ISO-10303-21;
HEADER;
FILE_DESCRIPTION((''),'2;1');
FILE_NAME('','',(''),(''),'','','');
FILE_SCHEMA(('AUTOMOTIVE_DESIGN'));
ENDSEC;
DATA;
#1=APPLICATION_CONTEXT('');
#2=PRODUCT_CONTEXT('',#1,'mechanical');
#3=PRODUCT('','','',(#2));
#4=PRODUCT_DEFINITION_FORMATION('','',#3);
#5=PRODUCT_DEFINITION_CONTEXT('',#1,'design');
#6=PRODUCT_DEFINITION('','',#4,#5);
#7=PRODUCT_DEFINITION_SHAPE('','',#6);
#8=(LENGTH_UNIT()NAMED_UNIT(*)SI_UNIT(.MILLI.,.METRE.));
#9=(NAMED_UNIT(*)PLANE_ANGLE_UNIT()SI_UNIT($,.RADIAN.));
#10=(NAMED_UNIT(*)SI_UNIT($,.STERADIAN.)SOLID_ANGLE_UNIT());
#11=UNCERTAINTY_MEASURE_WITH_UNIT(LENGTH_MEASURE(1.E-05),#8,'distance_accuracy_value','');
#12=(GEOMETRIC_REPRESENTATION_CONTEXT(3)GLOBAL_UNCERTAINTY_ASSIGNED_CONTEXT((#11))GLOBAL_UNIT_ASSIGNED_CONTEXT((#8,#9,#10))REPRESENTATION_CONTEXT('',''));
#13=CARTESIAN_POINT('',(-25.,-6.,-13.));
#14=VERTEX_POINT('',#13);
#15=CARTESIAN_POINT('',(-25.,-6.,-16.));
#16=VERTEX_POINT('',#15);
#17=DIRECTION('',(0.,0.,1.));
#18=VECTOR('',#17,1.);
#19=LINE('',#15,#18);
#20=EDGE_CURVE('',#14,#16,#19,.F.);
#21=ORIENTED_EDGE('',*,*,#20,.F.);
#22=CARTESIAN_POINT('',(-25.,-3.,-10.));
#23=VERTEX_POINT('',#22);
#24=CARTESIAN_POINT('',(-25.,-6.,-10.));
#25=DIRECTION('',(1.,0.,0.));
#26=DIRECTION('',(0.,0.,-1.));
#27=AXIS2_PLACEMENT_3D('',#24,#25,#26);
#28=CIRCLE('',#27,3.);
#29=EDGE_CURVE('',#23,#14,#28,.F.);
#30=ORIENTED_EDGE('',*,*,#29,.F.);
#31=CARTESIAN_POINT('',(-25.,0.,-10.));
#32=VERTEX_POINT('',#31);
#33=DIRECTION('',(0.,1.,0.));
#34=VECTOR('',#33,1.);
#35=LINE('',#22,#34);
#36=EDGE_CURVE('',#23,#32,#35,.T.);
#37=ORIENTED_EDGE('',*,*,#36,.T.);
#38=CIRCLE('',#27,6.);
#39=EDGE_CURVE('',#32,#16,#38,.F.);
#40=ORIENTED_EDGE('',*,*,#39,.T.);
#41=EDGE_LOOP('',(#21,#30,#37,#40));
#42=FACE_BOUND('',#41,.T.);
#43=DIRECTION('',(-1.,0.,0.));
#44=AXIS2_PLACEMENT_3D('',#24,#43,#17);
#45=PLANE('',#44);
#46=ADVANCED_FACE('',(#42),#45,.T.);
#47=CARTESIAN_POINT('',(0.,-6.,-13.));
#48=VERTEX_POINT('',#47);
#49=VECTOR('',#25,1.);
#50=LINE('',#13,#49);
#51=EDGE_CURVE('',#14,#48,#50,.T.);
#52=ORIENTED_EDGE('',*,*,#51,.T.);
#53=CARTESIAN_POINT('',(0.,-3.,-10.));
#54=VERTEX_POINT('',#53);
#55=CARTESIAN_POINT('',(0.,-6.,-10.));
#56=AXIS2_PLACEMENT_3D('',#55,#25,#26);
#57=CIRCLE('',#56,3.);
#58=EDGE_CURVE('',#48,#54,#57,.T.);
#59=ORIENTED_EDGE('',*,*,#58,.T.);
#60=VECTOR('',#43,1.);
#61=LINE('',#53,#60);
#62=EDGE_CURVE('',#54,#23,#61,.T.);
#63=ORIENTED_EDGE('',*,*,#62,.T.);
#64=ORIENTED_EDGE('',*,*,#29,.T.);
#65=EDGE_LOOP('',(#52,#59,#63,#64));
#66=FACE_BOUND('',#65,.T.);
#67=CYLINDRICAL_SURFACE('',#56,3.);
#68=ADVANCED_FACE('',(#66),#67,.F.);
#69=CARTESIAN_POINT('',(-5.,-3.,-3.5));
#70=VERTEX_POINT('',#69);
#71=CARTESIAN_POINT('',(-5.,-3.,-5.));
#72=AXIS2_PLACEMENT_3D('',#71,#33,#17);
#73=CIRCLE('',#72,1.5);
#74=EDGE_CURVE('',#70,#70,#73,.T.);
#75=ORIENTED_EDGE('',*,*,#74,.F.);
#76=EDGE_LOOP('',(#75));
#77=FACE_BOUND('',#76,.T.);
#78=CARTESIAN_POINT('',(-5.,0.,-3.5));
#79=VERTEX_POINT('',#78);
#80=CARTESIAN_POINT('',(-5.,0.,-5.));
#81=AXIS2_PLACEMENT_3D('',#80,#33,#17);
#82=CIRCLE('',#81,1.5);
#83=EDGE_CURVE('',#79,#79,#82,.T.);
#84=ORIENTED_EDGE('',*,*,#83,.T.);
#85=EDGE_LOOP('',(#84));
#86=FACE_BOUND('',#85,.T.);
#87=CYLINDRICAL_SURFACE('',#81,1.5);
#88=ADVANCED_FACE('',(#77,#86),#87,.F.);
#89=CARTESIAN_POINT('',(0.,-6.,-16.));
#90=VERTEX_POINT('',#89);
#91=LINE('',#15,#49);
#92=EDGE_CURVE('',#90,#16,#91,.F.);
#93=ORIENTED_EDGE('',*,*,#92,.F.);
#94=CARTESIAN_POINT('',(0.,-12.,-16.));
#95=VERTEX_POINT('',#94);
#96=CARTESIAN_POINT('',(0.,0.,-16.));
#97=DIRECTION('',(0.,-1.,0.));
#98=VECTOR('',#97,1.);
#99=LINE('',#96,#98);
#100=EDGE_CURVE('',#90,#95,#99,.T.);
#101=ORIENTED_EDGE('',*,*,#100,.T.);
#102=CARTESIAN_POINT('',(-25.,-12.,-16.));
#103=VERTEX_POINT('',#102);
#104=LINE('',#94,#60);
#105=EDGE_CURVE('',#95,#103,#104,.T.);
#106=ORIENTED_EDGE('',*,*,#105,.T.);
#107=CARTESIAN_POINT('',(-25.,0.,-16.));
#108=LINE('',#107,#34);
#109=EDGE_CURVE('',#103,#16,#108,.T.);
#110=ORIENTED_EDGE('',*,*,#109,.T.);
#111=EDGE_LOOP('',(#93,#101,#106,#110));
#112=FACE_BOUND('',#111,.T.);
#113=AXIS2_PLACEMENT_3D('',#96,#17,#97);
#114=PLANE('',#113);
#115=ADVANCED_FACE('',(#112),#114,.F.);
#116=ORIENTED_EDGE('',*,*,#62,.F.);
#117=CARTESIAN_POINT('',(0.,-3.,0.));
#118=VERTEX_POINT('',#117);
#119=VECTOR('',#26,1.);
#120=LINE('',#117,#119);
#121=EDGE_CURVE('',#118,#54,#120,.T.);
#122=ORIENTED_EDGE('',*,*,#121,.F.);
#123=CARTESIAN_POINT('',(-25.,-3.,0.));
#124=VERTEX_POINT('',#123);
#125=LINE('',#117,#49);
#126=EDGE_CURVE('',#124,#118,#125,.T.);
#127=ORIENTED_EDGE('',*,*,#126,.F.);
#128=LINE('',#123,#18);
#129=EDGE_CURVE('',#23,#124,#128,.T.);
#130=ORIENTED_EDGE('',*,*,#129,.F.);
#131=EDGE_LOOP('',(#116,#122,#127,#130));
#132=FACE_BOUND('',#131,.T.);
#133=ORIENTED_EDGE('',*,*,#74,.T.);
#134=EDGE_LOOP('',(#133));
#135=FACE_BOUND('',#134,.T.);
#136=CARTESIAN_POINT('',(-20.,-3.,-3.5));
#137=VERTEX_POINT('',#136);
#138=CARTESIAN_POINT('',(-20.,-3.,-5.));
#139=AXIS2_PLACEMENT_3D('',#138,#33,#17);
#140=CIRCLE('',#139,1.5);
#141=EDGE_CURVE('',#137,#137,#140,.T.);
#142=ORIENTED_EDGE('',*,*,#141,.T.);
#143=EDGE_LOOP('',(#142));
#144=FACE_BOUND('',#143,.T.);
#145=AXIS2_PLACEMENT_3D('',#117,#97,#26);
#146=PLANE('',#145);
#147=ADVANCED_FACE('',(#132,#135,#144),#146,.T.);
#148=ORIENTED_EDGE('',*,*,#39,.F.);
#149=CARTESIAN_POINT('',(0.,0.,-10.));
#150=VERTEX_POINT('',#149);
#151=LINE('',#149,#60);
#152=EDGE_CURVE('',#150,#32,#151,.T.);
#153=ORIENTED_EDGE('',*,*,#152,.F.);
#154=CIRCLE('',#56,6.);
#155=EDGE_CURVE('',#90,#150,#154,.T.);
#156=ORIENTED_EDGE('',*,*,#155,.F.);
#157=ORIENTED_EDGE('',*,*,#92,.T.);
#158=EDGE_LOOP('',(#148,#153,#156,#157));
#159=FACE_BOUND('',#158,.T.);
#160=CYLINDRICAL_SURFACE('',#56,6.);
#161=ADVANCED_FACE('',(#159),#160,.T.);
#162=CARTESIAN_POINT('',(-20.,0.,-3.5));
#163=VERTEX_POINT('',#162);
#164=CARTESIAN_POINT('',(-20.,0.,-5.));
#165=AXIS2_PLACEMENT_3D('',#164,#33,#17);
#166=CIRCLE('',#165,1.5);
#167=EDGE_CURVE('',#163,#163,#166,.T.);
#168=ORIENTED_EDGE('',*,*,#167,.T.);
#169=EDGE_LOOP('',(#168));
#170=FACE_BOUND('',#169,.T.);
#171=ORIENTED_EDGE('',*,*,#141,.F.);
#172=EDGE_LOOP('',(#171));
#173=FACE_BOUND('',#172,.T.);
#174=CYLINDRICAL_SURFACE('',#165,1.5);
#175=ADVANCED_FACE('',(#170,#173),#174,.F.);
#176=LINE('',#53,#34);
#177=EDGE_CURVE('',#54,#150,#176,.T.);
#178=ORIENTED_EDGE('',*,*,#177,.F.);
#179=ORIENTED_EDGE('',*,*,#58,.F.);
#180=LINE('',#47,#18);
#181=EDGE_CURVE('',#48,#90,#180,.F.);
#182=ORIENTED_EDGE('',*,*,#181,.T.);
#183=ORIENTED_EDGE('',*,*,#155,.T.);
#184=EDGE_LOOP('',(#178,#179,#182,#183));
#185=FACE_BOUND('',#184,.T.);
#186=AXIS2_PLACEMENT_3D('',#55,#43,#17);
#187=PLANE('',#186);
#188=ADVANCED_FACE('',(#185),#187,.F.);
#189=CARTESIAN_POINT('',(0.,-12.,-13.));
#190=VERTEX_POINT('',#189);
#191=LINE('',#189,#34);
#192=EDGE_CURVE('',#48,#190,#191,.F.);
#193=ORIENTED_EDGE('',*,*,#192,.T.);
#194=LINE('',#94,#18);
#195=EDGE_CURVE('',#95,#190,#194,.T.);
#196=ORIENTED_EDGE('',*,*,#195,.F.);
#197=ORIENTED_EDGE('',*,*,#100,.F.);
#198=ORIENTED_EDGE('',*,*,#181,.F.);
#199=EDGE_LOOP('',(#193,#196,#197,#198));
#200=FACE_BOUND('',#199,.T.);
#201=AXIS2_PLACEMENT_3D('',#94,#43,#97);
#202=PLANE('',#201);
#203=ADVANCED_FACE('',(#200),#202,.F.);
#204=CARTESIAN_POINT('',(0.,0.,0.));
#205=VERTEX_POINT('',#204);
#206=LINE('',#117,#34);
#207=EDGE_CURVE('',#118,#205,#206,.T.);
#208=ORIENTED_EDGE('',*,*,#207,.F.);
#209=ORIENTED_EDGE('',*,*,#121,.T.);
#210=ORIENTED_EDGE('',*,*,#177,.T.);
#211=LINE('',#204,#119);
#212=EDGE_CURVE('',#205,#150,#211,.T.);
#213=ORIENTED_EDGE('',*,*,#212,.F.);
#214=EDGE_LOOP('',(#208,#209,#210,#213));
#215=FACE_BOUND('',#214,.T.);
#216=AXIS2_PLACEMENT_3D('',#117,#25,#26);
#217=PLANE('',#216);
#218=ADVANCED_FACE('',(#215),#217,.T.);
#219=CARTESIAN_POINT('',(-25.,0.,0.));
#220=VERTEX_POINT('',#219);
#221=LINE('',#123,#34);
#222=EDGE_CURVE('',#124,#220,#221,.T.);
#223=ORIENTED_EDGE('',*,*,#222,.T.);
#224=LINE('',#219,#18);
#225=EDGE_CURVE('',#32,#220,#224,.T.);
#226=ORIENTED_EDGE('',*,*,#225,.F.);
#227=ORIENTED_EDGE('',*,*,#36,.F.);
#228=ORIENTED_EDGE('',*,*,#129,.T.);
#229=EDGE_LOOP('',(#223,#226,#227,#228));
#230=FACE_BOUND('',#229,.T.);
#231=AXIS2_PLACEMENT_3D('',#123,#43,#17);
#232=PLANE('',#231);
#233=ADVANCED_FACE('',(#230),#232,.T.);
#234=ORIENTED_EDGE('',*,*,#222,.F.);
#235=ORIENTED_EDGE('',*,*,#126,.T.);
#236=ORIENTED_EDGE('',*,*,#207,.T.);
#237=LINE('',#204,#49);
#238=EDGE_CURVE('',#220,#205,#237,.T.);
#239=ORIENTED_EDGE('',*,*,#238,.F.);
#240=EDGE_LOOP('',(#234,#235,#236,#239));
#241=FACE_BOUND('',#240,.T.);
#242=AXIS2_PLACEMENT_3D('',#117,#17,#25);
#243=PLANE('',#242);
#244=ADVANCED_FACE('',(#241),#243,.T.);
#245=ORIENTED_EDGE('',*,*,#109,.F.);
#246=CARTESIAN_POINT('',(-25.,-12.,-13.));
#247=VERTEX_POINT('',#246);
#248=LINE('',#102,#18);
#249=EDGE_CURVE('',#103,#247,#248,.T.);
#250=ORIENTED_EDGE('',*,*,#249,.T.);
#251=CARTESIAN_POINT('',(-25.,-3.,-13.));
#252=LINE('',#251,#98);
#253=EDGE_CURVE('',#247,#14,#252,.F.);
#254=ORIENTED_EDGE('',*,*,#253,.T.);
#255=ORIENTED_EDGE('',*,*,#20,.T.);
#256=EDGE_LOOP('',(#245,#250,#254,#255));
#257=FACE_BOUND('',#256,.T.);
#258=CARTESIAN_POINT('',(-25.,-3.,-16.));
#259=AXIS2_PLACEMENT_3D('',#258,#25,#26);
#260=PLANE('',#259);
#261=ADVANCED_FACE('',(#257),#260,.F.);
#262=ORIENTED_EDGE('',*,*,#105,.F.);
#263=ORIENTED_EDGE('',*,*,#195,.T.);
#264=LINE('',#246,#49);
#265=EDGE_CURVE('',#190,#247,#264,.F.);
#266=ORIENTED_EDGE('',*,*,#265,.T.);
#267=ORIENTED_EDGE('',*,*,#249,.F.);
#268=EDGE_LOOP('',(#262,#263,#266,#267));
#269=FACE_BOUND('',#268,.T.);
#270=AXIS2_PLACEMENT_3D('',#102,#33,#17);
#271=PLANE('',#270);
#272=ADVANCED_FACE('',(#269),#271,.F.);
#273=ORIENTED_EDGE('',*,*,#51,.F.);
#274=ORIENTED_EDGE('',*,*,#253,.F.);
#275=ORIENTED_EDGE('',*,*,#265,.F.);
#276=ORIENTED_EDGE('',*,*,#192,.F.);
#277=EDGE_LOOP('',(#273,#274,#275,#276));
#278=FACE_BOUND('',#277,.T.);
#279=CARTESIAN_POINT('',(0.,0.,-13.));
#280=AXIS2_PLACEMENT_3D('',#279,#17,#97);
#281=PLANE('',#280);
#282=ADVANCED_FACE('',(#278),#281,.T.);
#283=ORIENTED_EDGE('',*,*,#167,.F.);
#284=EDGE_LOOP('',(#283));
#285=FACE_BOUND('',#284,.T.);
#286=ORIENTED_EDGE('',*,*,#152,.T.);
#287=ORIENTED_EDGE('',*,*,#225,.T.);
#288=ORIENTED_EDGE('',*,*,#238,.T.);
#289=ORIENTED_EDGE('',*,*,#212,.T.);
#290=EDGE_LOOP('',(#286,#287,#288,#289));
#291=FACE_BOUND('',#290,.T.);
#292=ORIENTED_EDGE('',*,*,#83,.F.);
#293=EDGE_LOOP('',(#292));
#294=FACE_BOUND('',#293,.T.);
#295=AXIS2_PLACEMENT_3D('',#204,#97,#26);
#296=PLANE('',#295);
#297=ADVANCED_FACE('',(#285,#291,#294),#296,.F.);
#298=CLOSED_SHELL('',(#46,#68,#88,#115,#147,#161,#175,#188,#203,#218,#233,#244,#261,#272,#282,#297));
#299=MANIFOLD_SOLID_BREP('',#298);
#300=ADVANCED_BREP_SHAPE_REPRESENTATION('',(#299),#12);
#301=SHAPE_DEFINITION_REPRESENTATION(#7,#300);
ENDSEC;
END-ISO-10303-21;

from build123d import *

# Parameters (mm, degrees)
SKETCH1_W                = 25
SKETCH1_H                = 10
BASE_FLANGE1_DEPTH       = 3
F_3_0_3_DIAMETER_HOLE1_D = 3
SM_EDGE_FLANGE_1_DEPTH   = 25


# Sheet-metal steps are written as plain solids
with BuildPart() as part:
    # Sketch1 → Base-Flange1 (new body)
    with BuildSketch(Plane(origin=(0, 0, 0), x_dir=(1, 0, 0), z_dir=(0, 1, 0))):
        with Locations((-12.5, 5)):
            Rectangle(SKETCH1_W, SKETCH1_H)
    extrude(amount=-BASE_FLANGE1_DEPTH)

    # Ø3.0 (3) Diameter Hole1 (through all)
    with Locations(Plane(origin=(0, 0, 0), x_dir=(1, 0, 0), z_dir=(0, 1, 0))):
        with Locations((-20, 5), (-5, 5)):
            Hole(F_3_0_3_DIAMETER_HOLE1_D / 2)

    # 邊線-凸緣1 section (across the edge) → 邊線-凸緣1 (add)
    with BuildSketch(Plane(origin=(-25, -3, -13), x_dir=(0, 0, 1), z_dir=(1, 0, 0))):
        with BuildLine():
            Line((-3, 3), (-3, 9))
            Line((-3, 9), (0, 9))
            Line((0, 9), (0, 3))
            ThreePointArc((0, 3), (0.878679656, 0.878679656), (3, 0))
            Line((3, 0), (3, -3))
            ThreePointArc((3, -3), (-1.242640687, -1.242640687), (-3, 3))
        make_face()
    extrude(amount=SM_EDGE_FLANGE_1_DEPTH)


solid = part.part
